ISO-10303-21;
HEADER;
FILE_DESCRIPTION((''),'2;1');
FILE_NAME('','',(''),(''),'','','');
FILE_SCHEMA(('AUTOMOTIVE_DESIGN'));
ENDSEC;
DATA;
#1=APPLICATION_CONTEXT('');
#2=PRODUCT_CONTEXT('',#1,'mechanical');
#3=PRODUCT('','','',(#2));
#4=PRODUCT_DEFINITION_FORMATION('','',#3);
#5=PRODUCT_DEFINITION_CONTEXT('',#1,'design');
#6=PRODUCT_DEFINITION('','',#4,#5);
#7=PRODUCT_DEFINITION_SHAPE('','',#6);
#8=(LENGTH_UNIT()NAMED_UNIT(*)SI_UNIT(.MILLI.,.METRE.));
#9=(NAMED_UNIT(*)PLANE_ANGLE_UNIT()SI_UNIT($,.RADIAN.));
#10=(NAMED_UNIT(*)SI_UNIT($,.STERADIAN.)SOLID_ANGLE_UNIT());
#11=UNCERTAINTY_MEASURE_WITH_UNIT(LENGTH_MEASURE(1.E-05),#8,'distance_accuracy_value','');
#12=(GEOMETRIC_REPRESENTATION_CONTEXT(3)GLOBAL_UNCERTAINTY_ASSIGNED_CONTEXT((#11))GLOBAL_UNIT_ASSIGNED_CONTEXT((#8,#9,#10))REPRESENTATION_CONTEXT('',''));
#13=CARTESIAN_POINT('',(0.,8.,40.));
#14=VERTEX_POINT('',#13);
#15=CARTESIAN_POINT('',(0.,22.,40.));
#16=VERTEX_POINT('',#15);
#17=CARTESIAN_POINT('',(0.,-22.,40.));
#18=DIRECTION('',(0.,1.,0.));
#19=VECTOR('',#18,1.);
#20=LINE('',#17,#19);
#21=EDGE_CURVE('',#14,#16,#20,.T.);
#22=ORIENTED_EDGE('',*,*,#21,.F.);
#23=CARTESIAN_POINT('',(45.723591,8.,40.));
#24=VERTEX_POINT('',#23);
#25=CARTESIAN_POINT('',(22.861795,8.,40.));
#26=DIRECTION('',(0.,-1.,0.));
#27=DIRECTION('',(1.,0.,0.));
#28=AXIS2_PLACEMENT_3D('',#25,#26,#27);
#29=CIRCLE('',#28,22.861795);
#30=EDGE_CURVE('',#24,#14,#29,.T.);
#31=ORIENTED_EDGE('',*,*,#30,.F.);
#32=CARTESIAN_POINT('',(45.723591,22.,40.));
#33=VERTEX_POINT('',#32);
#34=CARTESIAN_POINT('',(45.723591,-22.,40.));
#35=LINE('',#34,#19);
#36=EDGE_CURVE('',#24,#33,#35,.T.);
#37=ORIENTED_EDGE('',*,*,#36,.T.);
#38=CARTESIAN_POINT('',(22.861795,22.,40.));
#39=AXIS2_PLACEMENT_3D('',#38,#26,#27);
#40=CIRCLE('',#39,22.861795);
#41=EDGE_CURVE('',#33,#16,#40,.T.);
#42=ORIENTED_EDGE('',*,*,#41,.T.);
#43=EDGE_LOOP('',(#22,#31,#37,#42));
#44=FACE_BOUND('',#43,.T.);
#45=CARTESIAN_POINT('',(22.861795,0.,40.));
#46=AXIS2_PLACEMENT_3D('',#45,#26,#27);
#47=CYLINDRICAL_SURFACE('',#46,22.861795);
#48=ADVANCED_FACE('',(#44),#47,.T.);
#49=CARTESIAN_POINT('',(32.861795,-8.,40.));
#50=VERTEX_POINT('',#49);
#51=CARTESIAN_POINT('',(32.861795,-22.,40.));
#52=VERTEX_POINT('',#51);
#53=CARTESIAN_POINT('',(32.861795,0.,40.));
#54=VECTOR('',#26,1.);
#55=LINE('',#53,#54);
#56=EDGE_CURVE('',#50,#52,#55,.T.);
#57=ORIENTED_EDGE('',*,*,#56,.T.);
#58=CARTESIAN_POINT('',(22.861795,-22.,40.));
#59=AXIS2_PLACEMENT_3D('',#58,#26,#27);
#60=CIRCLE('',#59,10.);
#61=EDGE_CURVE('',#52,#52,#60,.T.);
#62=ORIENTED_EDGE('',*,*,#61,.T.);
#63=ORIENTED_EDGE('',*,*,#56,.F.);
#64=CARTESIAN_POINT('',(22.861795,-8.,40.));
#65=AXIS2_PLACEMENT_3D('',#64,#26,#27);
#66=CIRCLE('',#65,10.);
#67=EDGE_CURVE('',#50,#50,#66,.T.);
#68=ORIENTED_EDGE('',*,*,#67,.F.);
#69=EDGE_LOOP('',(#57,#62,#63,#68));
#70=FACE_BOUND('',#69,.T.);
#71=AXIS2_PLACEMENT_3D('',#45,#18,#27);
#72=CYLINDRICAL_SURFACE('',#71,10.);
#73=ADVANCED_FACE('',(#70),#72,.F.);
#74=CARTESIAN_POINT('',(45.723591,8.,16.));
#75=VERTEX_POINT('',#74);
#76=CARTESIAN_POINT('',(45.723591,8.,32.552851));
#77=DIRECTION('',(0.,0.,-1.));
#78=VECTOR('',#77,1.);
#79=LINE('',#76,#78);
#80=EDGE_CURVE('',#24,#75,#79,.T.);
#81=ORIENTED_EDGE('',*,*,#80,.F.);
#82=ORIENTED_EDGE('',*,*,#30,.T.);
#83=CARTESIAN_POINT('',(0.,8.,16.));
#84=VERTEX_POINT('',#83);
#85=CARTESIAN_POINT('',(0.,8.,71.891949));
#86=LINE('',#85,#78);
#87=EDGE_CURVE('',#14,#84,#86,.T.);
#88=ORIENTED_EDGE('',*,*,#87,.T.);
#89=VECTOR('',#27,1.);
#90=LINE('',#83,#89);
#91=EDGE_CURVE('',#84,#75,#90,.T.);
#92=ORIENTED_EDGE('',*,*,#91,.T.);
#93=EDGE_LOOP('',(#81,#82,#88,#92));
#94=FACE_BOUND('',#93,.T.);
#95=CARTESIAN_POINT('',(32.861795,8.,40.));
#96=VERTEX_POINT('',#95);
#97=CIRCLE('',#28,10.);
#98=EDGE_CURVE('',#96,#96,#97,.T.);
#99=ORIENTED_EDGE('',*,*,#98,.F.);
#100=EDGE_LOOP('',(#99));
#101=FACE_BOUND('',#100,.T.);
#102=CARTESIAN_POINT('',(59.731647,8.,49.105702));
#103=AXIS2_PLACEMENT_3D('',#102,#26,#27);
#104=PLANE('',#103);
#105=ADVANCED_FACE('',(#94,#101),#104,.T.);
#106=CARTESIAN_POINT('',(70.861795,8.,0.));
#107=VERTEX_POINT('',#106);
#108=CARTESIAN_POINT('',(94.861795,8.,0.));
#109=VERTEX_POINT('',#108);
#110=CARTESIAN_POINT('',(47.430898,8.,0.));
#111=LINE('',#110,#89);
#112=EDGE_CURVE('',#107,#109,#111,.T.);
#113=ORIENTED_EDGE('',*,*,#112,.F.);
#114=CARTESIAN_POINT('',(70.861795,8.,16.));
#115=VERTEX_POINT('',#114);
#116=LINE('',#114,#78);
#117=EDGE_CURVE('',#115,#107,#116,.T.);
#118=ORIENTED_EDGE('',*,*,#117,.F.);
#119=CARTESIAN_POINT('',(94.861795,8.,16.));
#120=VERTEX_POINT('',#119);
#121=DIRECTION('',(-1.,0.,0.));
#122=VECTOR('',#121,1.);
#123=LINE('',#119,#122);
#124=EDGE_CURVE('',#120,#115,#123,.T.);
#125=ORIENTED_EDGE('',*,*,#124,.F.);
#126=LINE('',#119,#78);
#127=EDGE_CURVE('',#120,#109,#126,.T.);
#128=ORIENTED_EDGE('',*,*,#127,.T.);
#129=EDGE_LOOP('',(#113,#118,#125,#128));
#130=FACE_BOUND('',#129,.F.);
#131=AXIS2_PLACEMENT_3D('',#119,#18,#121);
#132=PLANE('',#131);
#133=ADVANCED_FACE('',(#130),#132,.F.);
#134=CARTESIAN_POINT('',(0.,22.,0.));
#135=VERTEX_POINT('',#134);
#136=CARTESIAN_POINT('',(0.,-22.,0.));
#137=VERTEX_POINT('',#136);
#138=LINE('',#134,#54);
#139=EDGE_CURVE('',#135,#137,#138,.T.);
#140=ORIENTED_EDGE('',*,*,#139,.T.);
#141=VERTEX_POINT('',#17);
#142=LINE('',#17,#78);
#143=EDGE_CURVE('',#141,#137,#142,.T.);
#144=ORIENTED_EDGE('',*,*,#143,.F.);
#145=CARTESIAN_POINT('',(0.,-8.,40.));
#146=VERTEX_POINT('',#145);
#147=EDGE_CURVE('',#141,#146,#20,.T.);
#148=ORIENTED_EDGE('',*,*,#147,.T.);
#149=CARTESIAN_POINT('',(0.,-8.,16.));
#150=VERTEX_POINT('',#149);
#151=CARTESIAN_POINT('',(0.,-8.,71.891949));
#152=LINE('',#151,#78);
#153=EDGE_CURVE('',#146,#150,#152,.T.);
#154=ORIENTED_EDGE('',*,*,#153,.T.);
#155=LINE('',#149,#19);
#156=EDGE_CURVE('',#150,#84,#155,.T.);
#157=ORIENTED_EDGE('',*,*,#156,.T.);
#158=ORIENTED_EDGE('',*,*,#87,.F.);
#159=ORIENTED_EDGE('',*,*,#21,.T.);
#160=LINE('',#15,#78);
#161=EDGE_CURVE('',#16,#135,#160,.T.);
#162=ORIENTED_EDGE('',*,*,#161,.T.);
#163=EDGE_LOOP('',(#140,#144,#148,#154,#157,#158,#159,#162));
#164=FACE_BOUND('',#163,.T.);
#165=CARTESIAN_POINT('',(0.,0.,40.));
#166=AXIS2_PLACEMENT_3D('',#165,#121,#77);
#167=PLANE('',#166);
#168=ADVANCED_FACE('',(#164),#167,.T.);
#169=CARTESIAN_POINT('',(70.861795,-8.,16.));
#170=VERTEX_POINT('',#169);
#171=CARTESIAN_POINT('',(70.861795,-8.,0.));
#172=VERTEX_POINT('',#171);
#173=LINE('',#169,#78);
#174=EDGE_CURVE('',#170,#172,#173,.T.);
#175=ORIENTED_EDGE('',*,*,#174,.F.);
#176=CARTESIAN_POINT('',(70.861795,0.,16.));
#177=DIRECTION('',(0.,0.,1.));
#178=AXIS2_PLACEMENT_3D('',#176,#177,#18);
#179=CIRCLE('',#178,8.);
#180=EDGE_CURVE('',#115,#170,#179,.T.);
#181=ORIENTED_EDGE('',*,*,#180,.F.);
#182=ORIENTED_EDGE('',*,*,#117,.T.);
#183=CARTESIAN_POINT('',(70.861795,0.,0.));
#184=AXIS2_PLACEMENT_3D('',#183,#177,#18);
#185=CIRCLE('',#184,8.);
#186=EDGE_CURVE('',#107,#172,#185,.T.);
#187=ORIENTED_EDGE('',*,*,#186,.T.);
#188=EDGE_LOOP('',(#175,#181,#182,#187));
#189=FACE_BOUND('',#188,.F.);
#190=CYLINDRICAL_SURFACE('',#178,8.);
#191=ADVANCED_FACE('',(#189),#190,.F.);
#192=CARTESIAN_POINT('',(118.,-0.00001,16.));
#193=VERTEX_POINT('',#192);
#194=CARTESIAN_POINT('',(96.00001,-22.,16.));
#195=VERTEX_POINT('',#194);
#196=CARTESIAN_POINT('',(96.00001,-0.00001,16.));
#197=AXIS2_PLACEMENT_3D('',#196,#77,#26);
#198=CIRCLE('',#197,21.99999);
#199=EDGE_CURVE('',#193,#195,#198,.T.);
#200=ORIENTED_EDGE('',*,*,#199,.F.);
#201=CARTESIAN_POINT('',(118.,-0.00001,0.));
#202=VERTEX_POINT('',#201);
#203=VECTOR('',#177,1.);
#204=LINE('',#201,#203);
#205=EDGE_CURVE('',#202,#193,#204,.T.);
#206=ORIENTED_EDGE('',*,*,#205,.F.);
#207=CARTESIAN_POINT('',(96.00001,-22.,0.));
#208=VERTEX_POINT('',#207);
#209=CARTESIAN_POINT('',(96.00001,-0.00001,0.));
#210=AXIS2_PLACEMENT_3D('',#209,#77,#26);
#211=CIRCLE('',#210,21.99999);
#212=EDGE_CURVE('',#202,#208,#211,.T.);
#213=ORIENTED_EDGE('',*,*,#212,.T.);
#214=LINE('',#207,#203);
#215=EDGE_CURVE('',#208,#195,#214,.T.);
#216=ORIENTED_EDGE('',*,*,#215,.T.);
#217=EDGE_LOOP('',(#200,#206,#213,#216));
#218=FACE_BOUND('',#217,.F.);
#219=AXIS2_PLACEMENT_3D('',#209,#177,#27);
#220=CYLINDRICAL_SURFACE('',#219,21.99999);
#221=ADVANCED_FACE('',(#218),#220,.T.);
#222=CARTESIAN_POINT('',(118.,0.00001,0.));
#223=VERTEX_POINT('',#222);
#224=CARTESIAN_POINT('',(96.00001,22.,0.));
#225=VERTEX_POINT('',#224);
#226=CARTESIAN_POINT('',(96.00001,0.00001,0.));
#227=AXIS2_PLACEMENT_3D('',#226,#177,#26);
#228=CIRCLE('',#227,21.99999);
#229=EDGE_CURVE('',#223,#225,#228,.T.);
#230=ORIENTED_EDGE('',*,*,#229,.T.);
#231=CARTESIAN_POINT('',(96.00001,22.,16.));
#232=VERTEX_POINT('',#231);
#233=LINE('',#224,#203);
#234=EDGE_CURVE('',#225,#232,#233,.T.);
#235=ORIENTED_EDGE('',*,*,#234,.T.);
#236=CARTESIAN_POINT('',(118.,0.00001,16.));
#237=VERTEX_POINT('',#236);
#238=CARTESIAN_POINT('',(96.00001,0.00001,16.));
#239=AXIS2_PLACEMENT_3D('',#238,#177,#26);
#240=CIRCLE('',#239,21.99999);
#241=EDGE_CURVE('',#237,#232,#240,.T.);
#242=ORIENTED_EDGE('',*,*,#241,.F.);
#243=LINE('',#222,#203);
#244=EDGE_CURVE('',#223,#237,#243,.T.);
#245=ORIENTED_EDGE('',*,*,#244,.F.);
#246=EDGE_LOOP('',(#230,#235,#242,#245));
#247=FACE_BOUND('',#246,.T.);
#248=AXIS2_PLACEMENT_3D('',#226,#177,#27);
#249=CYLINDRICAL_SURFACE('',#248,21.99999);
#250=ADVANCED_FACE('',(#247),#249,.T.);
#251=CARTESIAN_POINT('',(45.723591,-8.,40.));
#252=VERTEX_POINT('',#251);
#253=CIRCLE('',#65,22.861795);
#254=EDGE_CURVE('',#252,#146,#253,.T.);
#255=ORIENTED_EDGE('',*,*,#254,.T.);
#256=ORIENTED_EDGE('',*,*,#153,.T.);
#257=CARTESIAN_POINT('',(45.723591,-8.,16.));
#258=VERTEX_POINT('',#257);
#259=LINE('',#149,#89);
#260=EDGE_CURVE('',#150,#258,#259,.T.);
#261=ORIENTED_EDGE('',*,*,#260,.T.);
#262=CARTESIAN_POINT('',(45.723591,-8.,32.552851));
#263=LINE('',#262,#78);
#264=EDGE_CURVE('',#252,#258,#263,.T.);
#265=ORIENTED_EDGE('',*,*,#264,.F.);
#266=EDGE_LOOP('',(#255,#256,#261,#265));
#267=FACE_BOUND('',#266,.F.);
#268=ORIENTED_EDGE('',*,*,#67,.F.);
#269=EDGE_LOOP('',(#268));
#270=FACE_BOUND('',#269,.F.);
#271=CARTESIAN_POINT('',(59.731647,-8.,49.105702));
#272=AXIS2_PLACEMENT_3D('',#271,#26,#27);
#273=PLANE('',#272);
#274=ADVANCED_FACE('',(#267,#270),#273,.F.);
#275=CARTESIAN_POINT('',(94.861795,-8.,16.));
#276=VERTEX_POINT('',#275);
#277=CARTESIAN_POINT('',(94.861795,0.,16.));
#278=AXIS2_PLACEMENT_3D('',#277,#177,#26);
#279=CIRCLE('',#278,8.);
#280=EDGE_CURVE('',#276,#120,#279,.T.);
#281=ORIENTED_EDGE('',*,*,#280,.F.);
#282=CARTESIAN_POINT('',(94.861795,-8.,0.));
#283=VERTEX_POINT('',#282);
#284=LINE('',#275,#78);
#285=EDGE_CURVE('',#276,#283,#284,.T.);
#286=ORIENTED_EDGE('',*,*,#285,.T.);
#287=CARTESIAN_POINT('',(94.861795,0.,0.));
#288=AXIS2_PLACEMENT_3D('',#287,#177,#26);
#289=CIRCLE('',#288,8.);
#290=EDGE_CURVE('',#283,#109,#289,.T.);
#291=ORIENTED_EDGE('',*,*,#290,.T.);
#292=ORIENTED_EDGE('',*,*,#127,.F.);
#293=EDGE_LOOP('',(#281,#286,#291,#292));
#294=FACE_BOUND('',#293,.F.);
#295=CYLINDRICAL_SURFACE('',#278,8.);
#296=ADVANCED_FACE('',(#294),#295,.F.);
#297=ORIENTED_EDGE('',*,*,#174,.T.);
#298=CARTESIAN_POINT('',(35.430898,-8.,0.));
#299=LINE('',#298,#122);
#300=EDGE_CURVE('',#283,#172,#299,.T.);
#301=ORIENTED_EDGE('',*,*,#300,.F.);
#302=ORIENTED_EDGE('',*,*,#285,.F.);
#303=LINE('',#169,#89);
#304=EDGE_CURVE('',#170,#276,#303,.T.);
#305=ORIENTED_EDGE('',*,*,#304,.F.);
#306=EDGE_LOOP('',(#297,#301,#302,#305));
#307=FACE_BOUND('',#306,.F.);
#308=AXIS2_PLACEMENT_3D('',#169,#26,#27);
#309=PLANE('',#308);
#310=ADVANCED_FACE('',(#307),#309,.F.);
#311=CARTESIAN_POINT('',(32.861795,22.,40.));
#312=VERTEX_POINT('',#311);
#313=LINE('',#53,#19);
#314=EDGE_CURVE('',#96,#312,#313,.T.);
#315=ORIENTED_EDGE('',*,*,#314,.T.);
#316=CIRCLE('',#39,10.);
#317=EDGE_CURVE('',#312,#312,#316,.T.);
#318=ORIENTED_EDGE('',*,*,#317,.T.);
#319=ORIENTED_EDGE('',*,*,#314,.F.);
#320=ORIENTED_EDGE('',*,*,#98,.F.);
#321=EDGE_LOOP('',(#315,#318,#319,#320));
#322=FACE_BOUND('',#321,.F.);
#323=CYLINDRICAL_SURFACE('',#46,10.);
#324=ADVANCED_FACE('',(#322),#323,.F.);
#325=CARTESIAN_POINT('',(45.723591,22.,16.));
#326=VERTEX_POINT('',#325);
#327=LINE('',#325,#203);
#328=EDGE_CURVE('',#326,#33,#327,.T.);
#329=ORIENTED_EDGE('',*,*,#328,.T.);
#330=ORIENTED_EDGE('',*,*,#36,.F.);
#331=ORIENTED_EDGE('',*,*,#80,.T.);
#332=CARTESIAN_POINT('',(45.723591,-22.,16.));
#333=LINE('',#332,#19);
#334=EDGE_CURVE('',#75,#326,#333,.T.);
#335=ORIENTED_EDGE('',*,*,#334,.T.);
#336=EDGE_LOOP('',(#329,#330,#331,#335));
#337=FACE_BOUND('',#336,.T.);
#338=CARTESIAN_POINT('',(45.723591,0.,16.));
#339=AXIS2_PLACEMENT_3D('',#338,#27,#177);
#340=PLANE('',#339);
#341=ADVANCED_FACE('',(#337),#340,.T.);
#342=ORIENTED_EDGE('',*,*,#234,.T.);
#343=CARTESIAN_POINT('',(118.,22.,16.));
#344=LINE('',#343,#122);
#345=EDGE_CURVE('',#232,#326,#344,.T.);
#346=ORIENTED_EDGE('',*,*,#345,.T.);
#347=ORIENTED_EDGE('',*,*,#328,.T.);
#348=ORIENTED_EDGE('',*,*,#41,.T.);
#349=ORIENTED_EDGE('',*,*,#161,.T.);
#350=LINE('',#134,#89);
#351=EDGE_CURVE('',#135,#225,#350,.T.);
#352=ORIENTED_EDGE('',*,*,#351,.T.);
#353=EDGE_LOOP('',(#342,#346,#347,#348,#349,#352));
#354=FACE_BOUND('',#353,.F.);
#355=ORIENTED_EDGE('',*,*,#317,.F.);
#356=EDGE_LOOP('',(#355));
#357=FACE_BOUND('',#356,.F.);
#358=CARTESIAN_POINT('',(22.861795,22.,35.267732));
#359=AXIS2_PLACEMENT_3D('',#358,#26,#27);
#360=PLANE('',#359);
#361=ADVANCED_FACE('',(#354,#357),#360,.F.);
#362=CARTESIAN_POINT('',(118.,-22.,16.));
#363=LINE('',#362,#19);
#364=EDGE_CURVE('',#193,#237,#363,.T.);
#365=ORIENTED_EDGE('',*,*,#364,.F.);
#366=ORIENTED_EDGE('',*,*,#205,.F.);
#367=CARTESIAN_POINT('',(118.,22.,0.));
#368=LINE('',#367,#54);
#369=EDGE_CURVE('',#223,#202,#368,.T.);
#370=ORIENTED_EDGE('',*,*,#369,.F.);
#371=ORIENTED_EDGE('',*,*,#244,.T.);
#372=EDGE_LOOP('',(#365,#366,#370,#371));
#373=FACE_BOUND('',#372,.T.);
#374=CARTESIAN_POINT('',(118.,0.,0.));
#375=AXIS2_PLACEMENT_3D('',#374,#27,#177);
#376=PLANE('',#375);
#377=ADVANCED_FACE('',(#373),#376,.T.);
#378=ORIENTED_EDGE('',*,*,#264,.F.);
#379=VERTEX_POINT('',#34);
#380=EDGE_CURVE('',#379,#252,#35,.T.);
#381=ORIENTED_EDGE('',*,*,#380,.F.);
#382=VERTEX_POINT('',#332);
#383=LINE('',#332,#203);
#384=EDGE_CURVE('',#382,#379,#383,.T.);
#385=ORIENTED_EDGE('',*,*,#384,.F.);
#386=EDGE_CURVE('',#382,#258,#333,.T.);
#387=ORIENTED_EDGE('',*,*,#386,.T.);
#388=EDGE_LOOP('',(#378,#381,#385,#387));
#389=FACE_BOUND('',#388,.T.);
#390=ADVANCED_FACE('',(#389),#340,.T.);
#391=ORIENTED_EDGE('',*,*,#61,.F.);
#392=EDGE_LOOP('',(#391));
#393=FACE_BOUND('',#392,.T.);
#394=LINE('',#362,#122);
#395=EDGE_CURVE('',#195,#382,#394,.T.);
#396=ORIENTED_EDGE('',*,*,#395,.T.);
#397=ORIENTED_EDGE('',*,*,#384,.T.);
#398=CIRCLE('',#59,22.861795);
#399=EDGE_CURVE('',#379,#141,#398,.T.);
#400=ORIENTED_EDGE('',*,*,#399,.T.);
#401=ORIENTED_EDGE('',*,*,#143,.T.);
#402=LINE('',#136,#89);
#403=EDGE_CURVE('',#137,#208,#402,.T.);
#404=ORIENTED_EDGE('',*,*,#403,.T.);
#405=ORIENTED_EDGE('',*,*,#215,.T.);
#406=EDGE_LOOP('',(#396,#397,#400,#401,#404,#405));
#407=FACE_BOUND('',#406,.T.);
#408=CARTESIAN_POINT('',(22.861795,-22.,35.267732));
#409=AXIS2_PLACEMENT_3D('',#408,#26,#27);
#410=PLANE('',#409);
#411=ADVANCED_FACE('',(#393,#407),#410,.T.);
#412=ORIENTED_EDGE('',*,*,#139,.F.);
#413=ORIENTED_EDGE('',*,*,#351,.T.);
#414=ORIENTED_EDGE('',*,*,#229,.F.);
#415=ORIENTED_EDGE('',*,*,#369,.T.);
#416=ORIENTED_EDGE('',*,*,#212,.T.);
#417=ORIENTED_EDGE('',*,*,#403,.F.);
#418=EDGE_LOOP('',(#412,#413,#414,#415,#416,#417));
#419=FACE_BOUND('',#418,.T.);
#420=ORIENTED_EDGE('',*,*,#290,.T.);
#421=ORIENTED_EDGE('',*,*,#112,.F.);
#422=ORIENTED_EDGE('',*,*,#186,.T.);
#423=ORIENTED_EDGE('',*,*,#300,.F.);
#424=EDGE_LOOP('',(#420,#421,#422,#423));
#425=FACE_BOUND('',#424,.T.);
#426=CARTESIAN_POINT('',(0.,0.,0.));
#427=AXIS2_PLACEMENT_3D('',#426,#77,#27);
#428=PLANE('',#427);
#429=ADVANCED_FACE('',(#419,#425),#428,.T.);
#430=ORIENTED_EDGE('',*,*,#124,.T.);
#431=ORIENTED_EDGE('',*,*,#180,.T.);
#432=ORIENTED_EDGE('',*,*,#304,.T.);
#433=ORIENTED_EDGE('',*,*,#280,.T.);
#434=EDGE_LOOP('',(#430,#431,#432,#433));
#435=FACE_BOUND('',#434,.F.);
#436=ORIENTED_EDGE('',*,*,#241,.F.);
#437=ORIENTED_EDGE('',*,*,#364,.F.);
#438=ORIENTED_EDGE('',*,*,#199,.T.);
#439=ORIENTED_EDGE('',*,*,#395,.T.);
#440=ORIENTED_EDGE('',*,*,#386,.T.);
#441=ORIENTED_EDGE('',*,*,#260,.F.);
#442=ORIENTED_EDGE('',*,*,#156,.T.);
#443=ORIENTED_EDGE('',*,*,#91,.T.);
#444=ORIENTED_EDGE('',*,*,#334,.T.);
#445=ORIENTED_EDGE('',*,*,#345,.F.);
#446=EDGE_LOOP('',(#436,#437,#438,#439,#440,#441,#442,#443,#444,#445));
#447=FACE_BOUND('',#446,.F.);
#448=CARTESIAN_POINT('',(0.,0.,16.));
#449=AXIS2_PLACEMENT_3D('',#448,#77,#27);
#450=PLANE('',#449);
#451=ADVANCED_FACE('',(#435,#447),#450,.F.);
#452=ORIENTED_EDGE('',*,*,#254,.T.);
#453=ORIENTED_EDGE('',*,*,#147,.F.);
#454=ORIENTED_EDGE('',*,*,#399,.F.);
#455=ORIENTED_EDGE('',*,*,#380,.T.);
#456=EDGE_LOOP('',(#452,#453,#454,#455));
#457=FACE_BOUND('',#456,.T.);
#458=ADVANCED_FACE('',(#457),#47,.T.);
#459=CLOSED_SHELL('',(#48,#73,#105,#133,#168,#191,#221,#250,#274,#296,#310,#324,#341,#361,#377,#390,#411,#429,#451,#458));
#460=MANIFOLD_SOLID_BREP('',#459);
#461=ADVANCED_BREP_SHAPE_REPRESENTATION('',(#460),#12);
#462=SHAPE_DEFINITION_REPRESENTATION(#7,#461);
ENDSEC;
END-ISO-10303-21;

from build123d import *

# Parameters (mm, degrees)
F0_R          = 10
F1_DEPTH      = 22
F1_DEPTH_BACK = 22
F2_DEPTH      = 8
F2_DEPTH_BACK = 8
F3_R          = 21.99999
F5_DEPTH      = 25


# Not quite as in the source:
# - a fillet or chamfer is up to 0.001 mm smaller than in the source, because OpenCascade refuses the exact size


with BuildPart() as f1:
    # F0 (on Front) → F1 (new body, two sides)
    with BuildSketch(Plane.XZ) as f1_sk:
        with BuildLine():
            Line((0, 40), (0, 16))
            Line((0, 16), (45.7235909998, 16))
            Line((45.7235909998, 16), (45.7235909998, 40))
            ThreePointArc((45.7235909998, 40), (22.8617954999, 62.8617954999), (0, 40))
        make_face()
        with Locations((22.8617954999, 40)):
            Circle(F0_R, mode=Mode.SUBTRACT)
        Polygon((0, 16), (0, 0), (118, 0), (118, 16), (45.7235909998, 16), align=None)
    extrude(amount=F1_DEPTH)
    extrude(f1_sk.sketch, amount=-F1_DEPTH_BACK)

    # F0 (on Front) → F2 (cut, two sides)
    with BuildSketch(Plane.XZ) as f2_sk:
        with BuildLine():
            Line((45.7235909998, 16), (118, 16))
            Line((118, 16), (118, 71.8919485807))
            Line((118, 71.8919485807), (0, 71.8919485807))
            Line((0, 71.8919485807), (0, 40))
            ThreePointArc((0, 40), (22.8617954999, 62.8617954999), (45.7235909998, 40))
            Line((45.7235909998, 40), (45.7235909998, 16))
        make_face()
        with BuildLine():
            Line((0, 40), (0, 16))
            Line((0, 16), (45.7235909998, 16))
            Line((45.7235909998, 16), (45.7235909998, 40))
            ThreePointArc((45.7235909998, 40), (22.8617954999, 62.8617954999), (0, 40))
        make_face()
        with Locations((22.8617954999, 40)):
            Circle(F0_R, mode=Mode.SUBTRACT)
    extrude(amount=-F2_DEPTH, mode=Mode.SUBTRACT)
    extrude(f2_sk.sketch, amount=F2_DEPTH_BACK, mode=Mode.SUBTRACT)

    # F3 (radius 22 in the source; OpenCascade refuses exactly that, so slightly less here)
    f3_edges = [f1.edges().sort_by_distance(p)[0] for p in [
        (118, -22, 8),
        (118, 22, 8),
    ]]
    fillet(f3_edges, radius=F3_R)

    # F4 (on face) → F5 (cut)
    with BuildSketch(Plane.XY.offset(16)):
        with BuildLine():
            ThreePointArc((70.8617954999, 8), (62.8617954999, 0), (70.8617954999, -8))
            Line((70.8617954999, -8), (94.8617954999, -8))
            ThreePointArc((94.8617954999, -8), (102.8617954999, 0), (94.8617954999, 8))
            Line((94.8617954999, 8), (70.8617954999, 8))
        make_face()
    extrude(amount=-F5_DEPTH, mode=Mode.SUBTRACT)


solid = f1.part
